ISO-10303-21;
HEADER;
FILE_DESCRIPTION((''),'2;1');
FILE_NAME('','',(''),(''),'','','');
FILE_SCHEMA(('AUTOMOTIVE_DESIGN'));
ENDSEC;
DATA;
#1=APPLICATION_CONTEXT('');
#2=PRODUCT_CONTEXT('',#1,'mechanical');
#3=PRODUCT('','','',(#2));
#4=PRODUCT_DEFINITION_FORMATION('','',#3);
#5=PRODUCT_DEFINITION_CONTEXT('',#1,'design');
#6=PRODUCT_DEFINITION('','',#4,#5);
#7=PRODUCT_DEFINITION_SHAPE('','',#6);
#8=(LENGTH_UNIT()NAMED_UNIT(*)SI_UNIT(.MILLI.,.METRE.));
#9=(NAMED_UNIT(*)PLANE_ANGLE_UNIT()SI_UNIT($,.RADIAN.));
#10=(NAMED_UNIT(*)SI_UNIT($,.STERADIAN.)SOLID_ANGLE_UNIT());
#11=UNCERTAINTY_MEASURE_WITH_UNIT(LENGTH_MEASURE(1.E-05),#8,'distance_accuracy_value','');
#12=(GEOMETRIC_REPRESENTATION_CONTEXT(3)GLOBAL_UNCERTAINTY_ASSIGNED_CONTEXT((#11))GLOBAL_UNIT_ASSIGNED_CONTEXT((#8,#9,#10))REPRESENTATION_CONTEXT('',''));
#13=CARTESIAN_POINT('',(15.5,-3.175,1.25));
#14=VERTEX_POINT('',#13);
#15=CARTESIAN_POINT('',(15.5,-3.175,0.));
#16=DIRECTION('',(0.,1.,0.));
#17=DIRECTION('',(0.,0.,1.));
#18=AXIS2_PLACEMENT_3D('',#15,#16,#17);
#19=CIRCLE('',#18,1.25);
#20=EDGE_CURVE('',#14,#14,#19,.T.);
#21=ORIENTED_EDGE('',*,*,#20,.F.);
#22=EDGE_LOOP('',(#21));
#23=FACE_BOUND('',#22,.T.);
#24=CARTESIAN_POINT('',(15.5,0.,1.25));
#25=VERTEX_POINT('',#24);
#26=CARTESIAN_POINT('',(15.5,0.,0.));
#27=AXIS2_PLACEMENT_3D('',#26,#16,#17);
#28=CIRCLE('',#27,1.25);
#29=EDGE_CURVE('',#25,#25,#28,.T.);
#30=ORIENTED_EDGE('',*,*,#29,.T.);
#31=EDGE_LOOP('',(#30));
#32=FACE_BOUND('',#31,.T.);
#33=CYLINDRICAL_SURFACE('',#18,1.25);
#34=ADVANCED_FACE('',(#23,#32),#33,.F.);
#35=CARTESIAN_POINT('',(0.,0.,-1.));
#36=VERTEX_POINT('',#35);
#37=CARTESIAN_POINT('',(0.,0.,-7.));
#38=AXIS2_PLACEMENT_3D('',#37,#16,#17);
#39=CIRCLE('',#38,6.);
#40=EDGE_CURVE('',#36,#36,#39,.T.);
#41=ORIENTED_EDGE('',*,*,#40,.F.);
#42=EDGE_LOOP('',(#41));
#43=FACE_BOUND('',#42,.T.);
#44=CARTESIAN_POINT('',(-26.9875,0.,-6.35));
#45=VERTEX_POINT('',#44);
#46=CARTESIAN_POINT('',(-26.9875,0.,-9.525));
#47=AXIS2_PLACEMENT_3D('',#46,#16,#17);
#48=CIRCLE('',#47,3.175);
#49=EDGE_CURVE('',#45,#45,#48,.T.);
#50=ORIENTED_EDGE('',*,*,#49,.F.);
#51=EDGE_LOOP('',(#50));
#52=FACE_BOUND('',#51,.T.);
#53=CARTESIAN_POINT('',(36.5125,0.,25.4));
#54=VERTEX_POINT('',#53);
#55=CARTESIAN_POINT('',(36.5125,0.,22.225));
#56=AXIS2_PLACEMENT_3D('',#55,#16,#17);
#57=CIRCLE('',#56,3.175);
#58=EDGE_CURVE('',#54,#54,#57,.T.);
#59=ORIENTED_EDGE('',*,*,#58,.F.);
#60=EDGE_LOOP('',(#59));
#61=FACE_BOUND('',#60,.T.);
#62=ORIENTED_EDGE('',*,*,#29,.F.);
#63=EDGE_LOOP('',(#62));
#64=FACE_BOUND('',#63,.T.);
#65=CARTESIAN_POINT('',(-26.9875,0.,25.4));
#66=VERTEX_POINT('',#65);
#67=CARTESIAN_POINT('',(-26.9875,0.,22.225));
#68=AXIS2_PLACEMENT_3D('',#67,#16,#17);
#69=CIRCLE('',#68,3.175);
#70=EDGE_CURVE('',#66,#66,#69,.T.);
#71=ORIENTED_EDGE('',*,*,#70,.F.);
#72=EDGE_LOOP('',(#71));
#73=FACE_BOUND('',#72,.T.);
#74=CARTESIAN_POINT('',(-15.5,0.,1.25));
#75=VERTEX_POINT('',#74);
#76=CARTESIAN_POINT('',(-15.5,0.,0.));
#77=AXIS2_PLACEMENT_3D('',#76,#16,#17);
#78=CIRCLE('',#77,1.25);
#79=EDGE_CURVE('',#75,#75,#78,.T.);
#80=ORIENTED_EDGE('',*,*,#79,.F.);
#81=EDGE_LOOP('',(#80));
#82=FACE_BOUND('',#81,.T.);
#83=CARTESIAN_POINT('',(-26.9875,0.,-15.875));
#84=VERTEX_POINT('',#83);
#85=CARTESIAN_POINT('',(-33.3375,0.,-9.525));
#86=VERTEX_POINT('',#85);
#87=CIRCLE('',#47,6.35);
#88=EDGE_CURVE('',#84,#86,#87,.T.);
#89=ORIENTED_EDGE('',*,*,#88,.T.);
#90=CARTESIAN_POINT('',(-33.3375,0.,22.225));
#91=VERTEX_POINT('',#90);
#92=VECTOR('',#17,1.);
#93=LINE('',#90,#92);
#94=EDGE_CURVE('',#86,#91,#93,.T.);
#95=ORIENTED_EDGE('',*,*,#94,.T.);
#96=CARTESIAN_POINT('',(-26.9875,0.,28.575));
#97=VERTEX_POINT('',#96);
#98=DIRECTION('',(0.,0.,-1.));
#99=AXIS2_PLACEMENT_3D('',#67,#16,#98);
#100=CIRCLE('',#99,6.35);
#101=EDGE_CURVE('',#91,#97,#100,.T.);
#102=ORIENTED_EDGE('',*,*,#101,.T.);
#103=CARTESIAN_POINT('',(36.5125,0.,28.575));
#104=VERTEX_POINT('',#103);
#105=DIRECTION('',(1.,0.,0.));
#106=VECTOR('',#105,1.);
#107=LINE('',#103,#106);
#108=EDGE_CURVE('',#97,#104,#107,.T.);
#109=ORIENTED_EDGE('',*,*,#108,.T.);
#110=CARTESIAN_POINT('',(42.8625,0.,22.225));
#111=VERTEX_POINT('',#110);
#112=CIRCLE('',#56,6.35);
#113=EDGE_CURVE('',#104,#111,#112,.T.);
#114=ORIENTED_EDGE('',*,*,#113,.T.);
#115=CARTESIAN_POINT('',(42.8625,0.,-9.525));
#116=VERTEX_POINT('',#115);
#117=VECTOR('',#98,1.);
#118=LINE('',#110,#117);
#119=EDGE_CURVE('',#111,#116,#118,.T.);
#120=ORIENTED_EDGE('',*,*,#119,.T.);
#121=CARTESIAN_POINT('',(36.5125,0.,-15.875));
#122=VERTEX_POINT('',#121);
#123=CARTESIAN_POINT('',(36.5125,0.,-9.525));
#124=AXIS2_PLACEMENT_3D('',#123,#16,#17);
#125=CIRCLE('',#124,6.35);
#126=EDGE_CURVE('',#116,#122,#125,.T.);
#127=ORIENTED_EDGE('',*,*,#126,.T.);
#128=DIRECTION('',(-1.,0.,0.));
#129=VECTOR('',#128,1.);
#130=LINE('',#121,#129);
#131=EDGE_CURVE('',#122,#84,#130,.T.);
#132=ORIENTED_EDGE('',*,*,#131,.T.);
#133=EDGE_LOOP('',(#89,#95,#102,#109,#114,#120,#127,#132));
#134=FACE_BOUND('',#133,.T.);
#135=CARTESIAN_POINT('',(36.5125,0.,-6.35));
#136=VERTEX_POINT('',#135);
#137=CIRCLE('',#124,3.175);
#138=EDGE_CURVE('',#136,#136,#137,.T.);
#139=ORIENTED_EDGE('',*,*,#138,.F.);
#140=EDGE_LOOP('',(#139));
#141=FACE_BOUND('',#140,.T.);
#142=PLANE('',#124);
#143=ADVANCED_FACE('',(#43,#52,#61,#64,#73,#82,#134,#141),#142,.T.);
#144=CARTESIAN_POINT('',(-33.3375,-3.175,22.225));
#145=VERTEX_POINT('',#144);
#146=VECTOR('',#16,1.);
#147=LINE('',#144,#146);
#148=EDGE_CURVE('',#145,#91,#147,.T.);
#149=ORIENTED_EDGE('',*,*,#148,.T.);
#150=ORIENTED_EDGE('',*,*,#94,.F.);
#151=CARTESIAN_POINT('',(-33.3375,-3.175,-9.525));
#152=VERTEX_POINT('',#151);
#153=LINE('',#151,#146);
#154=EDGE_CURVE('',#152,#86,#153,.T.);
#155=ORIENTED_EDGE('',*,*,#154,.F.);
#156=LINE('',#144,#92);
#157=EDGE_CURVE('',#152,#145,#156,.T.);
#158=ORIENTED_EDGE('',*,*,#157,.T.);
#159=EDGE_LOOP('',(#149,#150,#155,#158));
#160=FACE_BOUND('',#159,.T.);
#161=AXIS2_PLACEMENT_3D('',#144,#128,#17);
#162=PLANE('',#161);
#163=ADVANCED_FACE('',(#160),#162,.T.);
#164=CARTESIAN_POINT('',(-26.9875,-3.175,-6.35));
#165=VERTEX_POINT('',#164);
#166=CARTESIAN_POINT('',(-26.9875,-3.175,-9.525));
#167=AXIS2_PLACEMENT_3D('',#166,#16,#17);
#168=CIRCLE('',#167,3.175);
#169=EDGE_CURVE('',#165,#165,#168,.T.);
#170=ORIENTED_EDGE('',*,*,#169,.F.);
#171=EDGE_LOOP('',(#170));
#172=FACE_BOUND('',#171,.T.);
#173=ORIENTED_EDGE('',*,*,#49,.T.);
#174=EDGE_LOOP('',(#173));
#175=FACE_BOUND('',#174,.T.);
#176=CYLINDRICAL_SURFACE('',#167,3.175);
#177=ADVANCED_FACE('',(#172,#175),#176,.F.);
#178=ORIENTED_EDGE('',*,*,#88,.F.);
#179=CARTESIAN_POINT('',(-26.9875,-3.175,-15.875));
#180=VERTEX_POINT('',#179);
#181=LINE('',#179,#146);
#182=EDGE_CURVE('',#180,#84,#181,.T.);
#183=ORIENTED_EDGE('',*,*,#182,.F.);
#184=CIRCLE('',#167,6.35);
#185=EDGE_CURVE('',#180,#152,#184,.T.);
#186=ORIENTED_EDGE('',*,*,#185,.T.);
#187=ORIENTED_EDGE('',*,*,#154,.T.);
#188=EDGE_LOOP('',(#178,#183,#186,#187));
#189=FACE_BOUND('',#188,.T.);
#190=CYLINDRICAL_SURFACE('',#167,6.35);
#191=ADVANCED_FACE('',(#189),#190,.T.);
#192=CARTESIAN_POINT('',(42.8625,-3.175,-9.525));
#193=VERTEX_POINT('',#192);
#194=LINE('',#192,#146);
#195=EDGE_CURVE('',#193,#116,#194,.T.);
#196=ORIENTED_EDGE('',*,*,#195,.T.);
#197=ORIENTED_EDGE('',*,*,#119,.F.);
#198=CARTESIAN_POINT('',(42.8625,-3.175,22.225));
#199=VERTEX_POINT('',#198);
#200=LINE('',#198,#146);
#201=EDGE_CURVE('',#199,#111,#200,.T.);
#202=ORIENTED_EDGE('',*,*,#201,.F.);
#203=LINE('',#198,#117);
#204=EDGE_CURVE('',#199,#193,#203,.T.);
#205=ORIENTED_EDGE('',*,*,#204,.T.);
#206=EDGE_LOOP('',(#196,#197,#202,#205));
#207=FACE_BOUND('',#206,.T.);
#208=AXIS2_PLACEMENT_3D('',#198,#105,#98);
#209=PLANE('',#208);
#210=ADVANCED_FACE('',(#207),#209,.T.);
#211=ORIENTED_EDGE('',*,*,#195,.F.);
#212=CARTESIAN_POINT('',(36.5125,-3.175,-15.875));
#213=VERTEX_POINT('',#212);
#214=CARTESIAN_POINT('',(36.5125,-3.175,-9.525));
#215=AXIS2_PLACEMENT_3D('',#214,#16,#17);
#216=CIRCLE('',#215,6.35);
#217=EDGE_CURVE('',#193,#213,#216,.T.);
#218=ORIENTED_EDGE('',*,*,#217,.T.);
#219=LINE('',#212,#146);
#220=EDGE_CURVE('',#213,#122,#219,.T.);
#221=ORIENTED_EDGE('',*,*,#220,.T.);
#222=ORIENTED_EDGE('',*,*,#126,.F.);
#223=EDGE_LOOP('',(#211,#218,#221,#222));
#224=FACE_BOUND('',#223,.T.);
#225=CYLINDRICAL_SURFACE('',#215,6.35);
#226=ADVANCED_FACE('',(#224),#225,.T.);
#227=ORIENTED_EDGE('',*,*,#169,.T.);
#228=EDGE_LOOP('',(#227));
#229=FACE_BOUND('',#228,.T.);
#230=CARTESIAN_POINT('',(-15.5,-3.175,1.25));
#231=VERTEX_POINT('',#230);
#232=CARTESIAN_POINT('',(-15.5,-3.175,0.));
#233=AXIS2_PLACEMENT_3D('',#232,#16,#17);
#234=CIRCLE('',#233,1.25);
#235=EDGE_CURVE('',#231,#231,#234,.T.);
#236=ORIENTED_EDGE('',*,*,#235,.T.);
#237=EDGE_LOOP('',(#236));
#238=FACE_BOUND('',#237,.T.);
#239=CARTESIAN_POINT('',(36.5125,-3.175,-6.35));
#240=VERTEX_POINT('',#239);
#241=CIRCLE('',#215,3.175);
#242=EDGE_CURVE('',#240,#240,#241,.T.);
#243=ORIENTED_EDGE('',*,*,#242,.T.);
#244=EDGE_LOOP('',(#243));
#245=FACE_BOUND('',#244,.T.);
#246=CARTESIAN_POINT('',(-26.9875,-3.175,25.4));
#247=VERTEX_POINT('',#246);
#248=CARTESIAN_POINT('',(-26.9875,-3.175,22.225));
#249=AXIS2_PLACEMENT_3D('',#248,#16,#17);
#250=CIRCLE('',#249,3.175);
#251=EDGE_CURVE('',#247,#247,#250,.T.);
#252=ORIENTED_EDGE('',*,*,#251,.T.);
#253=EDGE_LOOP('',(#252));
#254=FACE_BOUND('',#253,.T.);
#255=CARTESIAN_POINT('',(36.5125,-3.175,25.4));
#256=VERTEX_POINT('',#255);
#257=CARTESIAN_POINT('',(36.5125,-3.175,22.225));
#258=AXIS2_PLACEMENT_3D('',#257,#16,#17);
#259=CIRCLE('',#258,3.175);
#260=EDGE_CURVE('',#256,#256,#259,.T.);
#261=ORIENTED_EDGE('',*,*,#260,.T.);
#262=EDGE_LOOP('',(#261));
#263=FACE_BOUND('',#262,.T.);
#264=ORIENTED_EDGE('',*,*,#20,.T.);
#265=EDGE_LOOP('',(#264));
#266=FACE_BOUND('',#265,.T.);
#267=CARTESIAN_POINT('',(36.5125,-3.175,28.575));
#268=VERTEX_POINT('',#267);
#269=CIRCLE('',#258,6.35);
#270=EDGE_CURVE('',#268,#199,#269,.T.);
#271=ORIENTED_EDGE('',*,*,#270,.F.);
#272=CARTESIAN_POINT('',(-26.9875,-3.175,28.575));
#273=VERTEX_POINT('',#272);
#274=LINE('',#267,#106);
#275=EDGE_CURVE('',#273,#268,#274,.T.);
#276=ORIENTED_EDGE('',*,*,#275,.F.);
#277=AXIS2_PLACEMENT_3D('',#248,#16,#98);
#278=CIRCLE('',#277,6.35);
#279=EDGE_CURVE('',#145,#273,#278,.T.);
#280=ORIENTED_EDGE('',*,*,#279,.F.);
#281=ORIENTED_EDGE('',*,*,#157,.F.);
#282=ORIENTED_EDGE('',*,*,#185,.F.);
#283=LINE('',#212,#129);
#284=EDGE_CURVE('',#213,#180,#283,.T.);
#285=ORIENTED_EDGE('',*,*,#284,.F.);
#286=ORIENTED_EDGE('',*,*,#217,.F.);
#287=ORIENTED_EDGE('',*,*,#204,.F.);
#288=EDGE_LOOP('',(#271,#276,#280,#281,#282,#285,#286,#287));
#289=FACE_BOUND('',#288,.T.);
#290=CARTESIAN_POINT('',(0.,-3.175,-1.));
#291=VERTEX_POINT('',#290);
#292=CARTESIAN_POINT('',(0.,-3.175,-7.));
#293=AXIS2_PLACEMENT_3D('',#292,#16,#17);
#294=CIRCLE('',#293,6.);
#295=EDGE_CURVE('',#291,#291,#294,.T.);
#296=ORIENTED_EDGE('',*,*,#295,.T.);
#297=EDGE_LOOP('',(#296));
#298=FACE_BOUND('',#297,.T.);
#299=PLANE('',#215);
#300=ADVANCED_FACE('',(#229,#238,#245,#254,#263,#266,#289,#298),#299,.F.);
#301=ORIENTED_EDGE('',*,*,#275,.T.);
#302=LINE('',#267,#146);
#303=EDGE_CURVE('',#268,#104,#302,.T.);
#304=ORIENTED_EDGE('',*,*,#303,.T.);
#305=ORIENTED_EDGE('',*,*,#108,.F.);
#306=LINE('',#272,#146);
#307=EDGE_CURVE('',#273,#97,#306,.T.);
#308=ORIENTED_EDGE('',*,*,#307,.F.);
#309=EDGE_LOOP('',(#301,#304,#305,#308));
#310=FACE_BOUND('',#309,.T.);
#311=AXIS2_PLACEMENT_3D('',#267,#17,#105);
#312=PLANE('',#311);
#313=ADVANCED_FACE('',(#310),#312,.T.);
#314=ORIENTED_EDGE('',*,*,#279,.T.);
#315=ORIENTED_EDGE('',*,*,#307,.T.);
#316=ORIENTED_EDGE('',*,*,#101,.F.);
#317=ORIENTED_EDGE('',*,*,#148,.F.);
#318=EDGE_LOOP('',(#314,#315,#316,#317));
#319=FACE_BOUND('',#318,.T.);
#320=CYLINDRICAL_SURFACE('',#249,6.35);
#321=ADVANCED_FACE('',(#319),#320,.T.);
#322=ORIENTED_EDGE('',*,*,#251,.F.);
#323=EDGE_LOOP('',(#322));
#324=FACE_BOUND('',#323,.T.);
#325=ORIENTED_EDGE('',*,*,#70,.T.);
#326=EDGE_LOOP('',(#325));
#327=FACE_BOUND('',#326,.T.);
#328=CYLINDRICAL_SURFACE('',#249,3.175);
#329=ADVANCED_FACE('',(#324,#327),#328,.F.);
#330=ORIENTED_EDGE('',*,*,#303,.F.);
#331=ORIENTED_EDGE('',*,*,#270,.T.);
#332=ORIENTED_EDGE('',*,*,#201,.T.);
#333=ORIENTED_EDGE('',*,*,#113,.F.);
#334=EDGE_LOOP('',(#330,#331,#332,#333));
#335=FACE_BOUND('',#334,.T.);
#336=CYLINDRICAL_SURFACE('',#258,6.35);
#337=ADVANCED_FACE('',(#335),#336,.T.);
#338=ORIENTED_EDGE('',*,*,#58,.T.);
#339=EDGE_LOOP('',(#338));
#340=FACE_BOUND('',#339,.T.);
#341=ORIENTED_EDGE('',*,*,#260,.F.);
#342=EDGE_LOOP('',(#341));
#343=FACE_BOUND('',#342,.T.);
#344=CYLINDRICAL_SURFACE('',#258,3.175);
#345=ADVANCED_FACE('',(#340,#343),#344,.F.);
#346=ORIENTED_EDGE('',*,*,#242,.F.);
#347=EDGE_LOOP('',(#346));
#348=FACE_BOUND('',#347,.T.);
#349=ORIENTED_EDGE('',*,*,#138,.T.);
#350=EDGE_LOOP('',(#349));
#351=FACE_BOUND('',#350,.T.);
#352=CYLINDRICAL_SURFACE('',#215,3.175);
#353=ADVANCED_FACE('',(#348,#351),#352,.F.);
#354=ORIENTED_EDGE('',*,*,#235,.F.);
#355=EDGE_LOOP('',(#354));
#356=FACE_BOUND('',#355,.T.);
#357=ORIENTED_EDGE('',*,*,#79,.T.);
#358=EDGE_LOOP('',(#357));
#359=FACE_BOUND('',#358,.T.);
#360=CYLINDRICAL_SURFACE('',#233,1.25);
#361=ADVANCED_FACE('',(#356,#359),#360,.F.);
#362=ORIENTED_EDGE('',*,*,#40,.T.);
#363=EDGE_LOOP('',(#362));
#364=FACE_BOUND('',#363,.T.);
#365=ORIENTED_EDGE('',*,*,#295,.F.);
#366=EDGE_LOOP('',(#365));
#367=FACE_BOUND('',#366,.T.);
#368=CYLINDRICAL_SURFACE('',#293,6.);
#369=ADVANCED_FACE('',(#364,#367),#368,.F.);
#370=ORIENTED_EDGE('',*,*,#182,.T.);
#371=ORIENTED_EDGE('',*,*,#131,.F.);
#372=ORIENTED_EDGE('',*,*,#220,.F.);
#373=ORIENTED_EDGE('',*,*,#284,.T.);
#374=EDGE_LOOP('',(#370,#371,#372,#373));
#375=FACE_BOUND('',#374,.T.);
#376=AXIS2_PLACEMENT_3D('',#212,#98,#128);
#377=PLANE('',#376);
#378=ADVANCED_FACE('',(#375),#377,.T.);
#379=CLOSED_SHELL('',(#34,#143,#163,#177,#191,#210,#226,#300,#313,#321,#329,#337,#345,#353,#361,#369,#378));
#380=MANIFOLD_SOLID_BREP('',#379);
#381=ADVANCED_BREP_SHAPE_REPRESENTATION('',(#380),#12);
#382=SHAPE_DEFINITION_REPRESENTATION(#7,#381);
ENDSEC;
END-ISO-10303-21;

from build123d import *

# Parameters (mm, degrees)
BASE_FLANGE1_DEPTH = 3.175
SKETCH6_R          = 3.175
SKETCH6_R_2        = 6
SKETCH6_R_3        = 1.25
CUT_EXTRUDE1_DEPTH = 52.612064057


# Sheet-metal steps are written as plain solids
with BuildPart() as part:
    # Sketch1 → Base-Flange1 (new body)
    with BuildSketch(Plane(origin=(0, 0, 0), x_dir=(1, 0, 0), z_dir=(0, 1, 0))):
        with BuildLine():
            Line((36.5125, -28.575), (-26.9875, -28.575))
            ThreePointArc((-26.9875, -28.575), (-31.477628061, -26.715128061), (-33.3375, -22.225))
            Line((-33.3375, -22.225), (-33.3375, 9.525))
            ThreePointArc((-33.3375, 9.525), (-31.477628061, 14.015128061), (-26.9875, 15.875))
            Line((-26.9875, 15.875), (36.5125, 15.875))
            ThreePointArc((36.5125, 15.875), (41.002628061, 14.015128061), (42.8625, 9.525))
            Line((42.8625, 9.525), (42.8625, -22.225))
            ThreePointArc((42.8625, -22.225), (41.002628061, -26.715128061), (36.5125, -28.575))
        make_face()
    extrude(amount=-BASE_FLANGE1_DEPTH)

    # Sketch6 → Cut-Extrude1 (cut, through all)
    with BuildSketch(Plane(origin=(0, 0, 0), x_dir=(1, 0, 0), z_dir=(0, 1, 0))):
        with Locations(Location((-26.9875, 9.525, 0), (0, 0, 270))):
            Circle(SKETCH6_R)
        with Locations(Location((-26.9875, -22.225, 0), (0, 0, 270))):
            Circle(SKETCH6_R)
        with Locations(Location((36.5125, 9.525, 0), (0, 0, 270))):
            Circle(SKETCH6_R)
        with Locations(Location((36.5125, -22.225, 0), (0, 0, 270))):
            Circle(SKETCH6_R)
        with Locations(Location((0, 7, 0), (0, 0, 270))):
            Circle(SKETCH6_R_2)
        with Locations(Location((-15.5, 0, 0), (0, 0, 270))):
            Circle(SKETCH6_R_3)
        with Locations(Location((15.5, 0, 0), (0, 0, 270))):
            Circle(SKETCH6_R_3)
    extrude(amount=-CUT_EXTRUDE1_DEPTH, mode=Mode.SUBTRACT)


solid = part.part
